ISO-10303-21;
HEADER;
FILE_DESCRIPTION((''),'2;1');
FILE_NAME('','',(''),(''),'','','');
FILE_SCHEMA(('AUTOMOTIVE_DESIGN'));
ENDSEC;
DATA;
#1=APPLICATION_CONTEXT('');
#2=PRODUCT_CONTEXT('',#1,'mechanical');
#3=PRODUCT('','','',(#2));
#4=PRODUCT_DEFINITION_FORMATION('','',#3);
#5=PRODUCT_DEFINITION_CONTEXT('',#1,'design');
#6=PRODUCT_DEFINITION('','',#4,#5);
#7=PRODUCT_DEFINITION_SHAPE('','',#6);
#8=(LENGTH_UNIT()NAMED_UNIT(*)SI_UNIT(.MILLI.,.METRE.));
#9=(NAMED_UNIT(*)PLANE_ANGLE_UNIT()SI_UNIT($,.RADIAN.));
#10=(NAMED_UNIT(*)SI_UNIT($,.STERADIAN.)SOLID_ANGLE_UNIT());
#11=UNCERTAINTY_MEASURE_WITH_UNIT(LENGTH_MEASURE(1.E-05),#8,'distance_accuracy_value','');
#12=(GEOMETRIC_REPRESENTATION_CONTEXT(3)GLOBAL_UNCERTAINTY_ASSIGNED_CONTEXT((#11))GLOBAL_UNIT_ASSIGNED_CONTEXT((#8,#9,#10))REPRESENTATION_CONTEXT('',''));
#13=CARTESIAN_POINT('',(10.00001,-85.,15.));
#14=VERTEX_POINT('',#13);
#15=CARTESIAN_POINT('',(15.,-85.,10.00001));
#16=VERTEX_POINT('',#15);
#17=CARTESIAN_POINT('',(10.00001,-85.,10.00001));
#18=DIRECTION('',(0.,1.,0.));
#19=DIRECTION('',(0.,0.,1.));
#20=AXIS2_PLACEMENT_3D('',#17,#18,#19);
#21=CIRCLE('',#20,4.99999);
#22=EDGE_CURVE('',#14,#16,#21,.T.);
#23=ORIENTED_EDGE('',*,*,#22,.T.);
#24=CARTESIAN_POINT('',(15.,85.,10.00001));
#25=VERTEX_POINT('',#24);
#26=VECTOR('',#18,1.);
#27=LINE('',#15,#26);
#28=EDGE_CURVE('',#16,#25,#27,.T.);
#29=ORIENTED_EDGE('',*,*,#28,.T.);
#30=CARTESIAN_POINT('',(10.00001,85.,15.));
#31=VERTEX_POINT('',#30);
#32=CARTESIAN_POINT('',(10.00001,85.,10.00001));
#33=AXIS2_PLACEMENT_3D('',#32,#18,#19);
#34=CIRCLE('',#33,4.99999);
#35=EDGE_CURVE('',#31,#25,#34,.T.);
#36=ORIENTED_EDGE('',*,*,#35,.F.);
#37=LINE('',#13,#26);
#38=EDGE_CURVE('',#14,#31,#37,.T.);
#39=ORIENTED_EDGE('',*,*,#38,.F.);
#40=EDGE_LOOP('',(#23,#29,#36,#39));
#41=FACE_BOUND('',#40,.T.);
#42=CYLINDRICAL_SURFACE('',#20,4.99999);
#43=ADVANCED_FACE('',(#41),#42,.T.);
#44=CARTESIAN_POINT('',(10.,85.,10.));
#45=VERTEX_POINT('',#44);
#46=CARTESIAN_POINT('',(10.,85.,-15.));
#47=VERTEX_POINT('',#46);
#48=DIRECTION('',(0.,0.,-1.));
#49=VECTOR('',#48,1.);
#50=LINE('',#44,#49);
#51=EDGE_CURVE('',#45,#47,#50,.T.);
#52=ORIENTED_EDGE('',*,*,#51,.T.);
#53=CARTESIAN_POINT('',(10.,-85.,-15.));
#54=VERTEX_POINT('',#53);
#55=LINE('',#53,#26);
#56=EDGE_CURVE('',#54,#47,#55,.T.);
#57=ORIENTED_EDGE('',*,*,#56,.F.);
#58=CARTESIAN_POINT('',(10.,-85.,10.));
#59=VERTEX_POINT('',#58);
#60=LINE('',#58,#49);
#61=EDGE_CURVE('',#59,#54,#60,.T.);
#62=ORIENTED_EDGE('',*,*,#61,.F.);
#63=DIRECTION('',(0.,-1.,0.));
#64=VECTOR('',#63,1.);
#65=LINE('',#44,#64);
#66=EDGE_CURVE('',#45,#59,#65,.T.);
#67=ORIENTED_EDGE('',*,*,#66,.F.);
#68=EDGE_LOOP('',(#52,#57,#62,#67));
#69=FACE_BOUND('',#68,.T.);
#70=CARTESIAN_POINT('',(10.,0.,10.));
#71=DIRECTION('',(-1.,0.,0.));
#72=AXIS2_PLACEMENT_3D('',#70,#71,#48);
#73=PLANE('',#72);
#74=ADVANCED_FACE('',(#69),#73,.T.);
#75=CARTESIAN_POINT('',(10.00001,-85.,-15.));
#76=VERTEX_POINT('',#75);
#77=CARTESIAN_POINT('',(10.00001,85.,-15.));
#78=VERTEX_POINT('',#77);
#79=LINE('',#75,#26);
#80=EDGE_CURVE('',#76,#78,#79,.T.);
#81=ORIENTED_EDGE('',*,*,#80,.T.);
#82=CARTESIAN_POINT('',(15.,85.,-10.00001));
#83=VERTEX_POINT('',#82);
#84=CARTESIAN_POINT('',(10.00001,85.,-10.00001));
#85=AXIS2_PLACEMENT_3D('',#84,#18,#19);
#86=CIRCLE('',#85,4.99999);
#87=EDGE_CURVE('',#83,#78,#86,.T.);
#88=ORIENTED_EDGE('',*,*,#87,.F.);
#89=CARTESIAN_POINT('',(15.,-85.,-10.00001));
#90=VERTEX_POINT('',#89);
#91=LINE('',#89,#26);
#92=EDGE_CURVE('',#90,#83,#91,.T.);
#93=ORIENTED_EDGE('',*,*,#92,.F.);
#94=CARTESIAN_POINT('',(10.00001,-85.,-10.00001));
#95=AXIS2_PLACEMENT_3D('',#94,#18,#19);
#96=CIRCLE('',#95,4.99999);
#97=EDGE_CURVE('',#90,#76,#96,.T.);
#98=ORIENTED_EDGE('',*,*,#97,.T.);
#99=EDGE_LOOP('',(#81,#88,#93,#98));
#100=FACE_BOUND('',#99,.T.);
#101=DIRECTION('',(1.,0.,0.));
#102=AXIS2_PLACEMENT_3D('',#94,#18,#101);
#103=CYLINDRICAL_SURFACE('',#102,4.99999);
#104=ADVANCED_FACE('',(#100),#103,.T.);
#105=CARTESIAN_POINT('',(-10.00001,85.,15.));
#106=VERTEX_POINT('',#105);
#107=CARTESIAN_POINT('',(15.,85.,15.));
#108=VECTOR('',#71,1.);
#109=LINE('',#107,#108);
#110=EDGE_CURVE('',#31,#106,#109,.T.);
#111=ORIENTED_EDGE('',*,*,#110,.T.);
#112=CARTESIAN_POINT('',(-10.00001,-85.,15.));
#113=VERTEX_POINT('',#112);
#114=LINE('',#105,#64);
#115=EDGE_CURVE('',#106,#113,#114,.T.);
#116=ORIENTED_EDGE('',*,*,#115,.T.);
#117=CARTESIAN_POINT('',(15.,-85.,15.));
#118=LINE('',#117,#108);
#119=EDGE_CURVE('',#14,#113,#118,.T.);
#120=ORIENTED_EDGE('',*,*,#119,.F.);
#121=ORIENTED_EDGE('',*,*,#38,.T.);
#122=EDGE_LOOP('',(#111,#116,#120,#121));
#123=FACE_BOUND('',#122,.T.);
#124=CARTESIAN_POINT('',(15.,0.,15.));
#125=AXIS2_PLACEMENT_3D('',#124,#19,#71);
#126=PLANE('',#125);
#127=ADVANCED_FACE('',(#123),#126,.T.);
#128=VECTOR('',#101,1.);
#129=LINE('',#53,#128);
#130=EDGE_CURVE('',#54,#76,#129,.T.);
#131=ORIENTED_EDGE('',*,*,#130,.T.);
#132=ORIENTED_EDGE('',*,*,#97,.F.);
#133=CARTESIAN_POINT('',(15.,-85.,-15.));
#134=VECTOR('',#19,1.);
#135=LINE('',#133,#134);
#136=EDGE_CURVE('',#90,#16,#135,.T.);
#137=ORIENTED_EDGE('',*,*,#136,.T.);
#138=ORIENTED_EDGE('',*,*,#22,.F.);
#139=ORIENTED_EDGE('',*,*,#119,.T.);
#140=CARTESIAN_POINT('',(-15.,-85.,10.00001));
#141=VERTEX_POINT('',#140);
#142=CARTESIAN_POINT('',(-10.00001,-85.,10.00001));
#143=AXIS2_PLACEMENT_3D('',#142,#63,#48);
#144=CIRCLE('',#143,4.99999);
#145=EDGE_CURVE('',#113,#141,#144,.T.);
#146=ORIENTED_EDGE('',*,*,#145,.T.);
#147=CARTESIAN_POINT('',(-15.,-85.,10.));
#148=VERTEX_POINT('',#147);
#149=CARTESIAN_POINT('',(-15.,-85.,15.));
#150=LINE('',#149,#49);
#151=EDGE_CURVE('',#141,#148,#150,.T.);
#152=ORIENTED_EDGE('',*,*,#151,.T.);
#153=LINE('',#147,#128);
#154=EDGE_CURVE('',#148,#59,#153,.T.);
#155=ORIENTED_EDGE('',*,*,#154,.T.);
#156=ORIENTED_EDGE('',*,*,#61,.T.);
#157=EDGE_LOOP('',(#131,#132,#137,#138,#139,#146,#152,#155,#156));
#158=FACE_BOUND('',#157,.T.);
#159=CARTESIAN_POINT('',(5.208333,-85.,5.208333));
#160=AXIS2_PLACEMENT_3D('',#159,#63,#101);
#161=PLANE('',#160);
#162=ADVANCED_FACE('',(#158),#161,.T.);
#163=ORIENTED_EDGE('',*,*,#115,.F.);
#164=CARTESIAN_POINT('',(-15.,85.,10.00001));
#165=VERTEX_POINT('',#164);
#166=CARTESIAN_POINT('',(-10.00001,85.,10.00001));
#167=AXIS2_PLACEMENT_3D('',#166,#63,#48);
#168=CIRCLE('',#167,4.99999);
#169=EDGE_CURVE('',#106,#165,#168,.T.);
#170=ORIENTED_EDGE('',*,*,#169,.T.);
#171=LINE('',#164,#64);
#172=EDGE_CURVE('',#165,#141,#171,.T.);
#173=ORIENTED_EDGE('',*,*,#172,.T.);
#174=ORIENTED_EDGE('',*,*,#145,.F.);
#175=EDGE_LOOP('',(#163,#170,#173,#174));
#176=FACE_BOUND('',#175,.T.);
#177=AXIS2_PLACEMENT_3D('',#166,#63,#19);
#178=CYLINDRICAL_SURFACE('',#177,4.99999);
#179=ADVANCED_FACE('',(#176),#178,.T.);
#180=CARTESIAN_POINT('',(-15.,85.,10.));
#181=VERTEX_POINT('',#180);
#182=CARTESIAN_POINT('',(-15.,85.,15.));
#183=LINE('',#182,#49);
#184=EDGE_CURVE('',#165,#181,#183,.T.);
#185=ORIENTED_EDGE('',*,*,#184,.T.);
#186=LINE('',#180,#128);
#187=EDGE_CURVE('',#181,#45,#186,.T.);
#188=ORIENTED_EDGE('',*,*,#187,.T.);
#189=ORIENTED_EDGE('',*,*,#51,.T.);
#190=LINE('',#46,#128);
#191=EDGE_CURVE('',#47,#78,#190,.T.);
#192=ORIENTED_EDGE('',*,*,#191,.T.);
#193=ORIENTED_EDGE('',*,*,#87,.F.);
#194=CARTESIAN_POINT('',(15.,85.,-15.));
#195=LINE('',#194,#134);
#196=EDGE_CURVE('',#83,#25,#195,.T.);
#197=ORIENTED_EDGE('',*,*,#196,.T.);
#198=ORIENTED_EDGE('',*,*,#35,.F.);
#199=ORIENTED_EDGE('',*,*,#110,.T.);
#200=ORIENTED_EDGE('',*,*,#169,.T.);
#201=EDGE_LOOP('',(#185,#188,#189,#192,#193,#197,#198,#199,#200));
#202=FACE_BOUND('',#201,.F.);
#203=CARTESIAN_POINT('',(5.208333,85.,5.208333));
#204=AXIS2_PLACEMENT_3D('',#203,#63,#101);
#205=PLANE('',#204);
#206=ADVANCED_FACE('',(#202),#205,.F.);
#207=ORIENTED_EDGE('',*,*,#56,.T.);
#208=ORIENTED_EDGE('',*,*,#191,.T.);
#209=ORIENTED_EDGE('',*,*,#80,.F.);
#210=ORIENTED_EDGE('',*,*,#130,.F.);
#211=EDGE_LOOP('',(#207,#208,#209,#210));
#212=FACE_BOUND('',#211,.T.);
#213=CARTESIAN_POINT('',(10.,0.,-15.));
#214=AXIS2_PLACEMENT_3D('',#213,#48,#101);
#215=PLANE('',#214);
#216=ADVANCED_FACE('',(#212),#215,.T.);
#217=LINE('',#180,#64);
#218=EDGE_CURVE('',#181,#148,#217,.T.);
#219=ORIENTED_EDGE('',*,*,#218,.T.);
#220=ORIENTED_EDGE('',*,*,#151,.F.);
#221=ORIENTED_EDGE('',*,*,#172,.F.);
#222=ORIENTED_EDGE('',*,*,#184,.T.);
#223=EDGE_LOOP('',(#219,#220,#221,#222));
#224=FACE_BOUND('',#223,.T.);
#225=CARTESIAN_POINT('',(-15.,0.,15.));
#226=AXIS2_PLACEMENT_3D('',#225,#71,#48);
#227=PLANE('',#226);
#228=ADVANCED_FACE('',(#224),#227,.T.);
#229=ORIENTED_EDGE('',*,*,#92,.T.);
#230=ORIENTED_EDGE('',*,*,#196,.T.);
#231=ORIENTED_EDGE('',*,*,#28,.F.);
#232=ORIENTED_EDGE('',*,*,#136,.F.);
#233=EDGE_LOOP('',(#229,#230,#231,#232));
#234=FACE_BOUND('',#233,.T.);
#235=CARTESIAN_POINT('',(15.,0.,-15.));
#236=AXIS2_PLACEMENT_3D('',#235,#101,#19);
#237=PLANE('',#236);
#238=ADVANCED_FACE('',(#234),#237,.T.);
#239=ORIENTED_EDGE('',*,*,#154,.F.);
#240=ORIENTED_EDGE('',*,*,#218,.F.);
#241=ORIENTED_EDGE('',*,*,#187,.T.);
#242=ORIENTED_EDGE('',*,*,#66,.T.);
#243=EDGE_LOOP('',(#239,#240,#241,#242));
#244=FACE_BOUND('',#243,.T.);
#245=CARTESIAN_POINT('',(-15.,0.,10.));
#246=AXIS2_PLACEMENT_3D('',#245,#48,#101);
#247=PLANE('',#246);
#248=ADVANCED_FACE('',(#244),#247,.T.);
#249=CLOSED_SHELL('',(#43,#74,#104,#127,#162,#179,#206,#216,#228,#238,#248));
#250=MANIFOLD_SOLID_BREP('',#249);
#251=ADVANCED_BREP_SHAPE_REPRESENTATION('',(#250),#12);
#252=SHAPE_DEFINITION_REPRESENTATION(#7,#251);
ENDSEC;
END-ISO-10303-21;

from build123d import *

# Parameters (mm, degrees)
F1_DEPTH = 85
F2_R     = 4.99999


# Not quite as in the source:
# - a fillet or chamfer is up to 0.001 mm smaller than in the source, because OpenCascade refuses the exact size


with BuildPart() as f1:
    # F0 (on Front) → F1 (new body, symmetric)
    with BuildSketch(Plane.XZ):
        Polygon((15, 15), (-15, 15), (-15, 10), (10, 10), (10, -15), (15, -15), align=None)
    extrude(amount=F1_DEPTH, both=True)

    # F2 (radius 5 in the source; OpenCascade refuses exactly that, so slightly less here)
    f2_edges = [f1.edges().sort_by_distance(p)[0] for p in [
        (-15, 0, 15),
        (15, 0, 15),
        (15, 0, -15),
    ]]
    fillet(f2_edges, radius=F2_R)


solid = f1.part
